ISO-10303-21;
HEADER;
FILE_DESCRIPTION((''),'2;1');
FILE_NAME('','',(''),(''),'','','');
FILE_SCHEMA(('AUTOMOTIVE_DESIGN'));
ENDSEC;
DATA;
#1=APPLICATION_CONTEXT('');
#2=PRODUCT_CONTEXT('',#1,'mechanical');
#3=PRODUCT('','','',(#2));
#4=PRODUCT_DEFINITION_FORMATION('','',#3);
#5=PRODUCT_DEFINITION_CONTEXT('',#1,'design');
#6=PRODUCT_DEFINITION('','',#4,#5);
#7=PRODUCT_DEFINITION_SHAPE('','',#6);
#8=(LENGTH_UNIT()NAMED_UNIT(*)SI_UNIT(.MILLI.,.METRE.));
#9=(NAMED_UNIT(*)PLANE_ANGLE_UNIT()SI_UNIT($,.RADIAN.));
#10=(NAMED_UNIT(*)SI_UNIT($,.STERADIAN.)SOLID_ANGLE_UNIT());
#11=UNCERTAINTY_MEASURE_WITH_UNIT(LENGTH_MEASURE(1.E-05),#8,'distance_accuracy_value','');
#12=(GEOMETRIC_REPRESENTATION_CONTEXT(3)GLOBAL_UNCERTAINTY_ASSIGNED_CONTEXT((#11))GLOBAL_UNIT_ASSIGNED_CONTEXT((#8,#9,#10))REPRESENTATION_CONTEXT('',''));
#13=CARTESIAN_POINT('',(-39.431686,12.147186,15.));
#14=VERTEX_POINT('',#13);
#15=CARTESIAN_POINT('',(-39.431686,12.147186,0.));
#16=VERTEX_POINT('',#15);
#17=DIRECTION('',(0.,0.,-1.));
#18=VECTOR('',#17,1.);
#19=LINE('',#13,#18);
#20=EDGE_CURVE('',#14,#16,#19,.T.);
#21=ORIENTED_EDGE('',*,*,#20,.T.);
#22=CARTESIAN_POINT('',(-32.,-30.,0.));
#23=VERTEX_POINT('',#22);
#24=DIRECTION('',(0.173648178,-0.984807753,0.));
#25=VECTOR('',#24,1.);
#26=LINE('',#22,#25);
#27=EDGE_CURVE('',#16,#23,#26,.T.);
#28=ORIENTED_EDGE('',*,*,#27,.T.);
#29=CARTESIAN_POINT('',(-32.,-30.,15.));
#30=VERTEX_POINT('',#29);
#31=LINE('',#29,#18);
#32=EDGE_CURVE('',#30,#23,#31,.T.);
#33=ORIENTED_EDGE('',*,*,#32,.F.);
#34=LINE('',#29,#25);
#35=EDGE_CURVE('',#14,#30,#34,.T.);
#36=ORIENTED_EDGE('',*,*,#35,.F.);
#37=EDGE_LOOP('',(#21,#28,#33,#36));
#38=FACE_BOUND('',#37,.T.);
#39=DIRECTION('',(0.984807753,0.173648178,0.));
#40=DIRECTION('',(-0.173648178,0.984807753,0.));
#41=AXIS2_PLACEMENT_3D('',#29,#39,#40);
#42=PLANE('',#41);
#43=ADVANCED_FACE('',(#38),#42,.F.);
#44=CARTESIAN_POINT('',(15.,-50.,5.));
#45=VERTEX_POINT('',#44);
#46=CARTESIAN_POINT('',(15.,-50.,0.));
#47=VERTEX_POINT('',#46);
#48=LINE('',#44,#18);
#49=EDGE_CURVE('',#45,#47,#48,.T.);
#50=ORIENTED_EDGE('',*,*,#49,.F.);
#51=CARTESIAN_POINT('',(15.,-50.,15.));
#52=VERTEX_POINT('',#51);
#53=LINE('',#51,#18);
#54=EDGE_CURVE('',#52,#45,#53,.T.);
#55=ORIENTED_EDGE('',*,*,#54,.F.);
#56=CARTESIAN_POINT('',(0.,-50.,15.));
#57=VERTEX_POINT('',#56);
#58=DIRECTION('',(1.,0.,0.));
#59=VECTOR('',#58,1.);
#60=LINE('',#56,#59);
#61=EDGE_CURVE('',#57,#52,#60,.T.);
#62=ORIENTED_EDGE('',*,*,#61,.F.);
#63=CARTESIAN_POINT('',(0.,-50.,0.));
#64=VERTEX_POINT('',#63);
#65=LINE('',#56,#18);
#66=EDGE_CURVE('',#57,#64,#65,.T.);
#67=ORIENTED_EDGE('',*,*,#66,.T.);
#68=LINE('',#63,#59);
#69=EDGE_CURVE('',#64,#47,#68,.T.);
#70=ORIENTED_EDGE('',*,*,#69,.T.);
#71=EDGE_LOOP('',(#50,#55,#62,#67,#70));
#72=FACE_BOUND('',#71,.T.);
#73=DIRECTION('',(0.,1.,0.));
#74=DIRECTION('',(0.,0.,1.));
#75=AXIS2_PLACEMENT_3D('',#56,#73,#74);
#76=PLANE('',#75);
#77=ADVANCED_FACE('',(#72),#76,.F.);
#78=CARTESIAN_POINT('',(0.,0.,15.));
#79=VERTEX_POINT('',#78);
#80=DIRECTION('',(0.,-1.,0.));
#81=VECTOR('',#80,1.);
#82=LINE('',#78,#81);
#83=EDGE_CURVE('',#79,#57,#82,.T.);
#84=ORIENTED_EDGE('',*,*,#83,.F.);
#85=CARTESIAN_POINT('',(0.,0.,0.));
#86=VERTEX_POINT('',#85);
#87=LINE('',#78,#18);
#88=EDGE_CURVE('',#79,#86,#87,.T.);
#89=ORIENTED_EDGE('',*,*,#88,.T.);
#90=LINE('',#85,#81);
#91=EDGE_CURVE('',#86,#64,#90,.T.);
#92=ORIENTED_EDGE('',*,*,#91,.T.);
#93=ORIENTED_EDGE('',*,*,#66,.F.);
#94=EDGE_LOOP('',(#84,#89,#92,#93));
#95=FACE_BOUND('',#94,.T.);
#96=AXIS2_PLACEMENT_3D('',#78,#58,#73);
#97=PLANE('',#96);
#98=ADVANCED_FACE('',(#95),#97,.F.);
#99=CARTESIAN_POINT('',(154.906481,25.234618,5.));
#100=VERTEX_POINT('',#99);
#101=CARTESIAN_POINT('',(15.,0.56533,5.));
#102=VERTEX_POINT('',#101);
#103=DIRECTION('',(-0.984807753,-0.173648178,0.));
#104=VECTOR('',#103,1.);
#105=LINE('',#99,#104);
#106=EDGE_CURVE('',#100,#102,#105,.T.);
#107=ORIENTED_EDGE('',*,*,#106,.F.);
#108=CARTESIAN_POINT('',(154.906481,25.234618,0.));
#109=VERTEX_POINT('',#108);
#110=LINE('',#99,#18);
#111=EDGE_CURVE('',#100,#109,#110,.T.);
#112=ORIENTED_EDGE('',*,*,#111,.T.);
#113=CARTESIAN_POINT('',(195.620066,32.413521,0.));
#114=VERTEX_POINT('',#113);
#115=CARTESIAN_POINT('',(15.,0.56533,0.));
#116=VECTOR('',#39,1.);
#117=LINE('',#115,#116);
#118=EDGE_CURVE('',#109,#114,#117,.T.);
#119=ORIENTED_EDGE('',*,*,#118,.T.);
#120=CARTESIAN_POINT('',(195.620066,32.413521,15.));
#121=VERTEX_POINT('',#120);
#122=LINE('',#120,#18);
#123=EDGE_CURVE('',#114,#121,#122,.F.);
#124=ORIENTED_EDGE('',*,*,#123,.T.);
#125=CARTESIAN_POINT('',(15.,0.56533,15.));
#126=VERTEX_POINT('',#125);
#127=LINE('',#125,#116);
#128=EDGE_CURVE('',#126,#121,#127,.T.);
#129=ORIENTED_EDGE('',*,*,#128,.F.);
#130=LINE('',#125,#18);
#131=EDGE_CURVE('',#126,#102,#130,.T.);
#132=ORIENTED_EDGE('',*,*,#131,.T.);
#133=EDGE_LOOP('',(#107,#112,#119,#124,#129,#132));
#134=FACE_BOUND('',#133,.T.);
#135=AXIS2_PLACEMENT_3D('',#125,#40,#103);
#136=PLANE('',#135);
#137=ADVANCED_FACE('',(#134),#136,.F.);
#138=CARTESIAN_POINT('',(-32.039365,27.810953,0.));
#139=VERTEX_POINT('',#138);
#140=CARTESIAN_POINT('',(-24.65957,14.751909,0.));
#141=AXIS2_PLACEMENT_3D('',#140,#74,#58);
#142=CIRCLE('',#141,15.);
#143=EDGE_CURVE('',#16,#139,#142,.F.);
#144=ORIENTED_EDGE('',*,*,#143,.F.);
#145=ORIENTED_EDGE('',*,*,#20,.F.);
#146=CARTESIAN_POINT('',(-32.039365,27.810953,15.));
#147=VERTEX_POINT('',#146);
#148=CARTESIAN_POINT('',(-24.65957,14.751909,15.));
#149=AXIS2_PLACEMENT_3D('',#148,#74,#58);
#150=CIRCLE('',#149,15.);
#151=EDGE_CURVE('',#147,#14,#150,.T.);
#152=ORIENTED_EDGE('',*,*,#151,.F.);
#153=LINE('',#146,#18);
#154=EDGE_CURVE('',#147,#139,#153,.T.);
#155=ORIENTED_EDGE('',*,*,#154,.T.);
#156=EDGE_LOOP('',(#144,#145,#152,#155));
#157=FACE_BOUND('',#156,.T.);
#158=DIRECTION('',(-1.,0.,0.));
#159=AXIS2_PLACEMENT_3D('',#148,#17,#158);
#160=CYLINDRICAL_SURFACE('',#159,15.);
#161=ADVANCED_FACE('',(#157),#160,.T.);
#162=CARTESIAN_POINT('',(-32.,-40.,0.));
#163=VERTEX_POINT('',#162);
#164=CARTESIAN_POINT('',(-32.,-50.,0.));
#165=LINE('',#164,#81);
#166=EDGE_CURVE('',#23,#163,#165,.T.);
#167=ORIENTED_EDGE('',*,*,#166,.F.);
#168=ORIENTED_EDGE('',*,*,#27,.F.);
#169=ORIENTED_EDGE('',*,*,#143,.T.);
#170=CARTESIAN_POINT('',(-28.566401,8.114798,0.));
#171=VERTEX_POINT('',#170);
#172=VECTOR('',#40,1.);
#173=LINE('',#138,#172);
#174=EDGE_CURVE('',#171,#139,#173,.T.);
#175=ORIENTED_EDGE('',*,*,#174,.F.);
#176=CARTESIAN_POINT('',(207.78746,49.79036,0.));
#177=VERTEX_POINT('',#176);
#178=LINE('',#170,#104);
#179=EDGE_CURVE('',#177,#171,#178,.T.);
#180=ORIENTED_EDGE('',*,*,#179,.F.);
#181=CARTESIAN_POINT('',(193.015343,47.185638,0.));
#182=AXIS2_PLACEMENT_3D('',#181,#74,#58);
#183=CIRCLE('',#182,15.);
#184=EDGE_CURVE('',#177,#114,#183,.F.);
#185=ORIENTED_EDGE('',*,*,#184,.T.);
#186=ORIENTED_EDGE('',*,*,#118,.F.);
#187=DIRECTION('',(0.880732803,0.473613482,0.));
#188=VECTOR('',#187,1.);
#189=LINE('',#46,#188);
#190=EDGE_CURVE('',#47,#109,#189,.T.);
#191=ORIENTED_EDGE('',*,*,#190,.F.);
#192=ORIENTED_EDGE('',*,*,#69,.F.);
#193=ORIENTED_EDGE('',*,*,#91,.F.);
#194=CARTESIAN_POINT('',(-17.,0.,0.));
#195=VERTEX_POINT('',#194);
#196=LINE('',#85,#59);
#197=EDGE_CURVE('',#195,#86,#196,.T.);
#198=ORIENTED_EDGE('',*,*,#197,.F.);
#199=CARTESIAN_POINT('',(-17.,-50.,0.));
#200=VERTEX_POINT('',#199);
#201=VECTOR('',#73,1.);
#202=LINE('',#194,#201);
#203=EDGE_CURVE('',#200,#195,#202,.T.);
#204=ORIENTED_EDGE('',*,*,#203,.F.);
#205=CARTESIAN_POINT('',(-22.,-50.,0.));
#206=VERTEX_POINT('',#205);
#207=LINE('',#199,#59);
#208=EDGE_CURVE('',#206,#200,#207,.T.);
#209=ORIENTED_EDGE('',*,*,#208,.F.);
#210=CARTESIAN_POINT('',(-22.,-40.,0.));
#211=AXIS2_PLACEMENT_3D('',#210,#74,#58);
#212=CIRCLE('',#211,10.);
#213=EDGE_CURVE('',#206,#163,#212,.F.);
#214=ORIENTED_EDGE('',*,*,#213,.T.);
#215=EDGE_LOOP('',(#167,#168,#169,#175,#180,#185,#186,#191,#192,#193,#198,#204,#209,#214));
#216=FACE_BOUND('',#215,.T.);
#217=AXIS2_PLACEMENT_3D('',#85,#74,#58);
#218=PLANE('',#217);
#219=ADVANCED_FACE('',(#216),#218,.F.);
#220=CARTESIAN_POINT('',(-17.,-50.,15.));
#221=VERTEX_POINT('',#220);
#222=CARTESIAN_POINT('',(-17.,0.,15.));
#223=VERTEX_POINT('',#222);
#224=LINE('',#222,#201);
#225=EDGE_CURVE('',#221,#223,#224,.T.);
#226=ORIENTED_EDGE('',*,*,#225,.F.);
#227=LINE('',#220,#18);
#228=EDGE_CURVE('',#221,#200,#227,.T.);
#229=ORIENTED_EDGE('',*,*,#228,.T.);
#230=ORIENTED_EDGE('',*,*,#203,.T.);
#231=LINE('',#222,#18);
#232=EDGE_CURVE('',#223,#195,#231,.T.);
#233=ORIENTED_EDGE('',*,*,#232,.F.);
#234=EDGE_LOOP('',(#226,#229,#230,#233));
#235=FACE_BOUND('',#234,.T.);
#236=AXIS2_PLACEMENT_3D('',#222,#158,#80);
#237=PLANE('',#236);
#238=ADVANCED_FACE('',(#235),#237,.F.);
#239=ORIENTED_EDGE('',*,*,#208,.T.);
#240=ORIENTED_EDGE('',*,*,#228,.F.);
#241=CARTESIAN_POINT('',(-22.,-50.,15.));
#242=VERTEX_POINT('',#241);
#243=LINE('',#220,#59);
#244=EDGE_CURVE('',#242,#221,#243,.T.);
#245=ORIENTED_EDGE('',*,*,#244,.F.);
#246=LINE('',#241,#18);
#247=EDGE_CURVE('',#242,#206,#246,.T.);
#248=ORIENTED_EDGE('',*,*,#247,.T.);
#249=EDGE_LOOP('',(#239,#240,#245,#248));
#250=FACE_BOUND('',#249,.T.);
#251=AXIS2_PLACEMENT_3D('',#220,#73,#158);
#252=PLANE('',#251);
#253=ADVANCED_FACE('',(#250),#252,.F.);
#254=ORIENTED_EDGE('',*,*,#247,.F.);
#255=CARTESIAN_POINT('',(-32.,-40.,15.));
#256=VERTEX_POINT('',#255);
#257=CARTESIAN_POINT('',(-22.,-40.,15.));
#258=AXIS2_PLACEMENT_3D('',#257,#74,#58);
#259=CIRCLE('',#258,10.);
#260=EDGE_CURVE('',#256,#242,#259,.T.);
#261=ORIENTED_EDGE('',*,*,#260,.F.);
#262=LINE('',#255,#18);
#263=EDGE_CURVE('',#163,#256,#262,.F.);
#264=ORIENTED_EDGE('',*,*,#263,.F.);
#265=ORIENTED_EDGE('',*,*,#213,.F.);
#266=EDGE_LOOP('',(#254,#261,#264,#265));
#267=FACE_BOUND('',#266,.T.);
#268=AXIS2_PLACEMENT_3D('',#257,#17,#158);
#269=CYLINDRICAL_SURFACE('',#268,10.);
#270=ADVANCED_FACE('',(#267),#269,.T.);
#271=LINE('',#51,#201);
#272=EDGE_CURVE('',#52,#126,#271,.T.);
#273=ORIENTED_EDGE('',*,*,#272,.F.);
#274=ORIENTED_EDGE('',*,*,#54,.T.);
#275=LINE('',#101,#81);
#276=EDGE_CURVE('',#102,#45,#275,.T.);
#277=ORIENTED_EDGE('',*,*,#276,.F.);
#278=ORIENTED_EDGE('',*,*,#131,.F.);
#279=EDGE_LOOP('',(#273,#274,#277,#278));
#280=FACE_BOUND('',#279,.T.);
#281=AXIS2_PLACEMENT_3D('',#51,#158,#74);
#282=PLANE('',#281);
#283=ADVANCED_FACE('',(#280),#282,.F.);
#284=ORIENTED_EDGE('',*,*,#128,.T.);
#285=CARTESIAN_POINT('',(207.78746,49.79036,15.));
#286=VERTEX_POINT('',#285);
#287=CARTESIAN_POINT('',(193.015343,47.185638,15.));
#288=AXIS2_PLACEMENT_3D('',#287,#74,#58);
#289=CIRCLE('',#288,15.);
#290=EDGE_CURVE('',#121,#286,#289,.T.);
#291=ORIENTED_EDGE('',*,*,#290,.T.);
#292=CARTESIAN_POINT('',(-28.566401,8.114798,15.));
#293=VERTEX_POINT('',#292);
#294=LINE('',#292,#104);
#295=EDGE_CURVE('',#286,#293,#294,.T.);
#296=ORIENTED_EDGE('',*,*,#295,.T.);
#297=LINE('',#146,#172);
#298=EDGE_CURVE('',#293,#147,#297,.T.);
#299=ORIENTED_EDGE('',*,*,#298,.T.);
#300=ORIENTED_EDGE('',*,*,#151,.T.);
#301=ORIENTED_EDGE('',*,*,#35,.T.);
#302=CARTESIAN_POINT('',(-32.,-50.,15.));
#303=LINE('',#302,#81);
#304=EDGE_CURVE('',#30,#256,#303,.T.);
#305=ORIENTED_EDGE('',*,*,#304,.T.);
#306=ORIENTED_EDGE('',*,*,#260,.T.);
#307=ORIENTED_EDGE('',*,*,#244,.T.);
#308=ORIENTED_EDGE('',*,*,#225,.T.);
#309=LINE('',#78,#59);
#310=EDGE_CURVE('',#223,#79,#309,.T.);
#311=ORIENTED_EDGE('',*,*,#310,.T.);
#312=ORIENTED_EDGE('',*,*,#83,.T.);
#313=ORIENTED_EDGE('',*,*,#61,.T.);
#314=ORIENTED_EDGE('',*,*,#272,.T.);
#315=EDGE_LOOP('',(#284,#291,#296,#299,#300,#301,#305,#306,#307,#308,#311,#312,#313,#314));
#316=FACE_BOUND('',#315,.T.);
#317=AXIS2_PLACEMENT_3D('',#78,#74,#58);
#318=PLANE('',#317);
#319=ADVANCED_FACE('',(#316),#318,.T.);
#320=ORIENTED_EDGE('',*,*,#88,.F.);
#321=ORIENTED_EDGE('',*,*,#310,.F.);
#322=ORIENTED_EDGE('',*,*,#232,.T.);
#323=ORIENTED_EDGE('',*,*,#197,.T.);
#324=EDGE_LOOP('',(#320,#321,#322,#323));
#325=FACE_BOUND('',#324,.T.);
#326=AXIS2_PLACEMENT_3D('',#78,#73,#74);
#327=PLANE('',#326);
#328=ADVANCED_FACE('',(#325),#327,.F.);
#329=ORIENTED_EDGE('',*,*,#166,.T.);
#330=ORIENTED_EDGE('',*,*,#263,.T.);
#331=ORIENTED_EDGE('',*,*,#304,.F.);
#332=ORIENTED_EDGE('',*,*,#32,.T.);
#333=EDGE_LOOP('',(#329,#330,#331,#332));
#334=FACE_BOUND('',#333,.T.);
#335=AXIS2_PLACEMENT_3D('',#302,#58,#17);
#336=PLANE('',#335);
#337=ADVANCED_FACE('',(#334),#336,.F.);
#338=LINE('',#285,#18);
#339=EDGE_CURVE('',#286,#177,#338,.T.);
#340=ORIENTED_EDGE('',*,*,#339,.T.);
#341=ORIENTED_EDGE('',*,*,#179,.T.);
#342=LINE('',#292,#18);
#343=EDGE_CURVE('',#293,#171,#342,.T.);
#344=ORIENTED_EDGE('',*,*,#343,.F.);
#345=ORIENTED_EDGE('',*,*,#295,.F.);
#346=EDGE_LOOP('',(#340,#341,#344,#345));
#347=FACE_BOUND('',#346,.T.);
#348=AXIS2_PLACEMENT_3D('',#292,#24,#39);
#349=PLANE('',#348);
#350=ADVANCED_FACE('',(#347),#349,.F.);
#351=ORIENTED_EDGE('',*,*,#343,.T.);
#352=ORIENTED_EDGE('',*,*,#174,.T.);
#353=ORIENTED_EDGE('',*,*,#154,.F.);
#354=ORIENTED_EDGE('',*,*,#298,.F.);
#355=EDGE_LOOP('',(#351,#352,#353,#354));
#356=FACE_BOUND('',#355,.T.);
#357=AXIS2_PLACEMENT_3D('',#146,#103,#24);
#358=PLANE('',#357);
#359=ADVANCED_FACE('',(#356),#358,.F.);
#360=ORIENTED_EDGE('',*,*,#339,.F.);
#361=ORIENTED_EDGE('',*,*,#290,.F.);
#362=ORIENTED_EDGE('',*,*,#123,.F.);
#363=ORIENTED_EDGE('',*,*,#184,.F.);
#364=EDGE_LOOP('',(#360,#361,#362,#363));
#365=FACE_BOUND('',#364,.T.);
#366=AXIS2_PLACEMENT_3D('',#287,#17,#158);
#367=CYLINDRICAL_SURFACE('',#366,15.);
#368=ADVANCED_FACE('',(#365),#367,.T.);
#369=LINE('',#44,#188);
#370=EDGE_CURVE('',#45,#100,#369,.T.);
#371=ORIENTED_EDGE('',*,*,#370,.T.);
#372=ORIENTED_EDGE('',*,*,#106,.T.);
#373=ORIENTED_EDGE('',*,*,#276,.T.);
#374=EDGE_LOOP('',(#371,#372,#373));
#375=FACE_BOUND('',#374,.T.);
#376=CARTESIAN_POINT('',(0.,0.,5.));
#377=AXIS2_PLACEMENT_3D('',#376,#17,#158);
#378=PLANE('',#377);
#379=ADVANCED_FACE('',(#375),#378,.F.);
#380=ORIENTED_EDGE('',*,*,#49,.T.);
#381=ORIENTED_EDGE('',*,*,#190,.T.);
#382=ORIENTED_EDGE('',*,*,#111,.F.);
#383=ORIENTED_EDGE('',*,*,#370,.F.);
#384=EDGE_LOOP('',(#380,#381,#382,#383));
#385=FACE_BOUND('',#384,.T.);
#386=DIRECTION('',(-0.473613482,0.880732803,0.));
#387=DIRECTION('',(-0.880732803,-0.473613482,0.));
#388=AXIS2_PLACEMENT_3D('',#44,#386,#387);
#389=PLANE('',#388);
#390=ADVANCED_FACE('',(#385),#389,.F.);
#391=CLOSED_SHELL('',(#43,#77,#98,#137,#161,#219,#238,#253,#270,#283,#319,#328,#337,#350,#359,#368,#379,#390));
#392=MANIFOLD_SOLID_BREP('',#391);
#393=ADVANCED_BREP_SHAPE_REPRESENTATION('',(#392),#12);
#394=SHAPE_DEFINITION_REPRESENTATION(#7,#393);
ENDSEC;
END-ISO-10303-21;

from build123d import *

# Parameters (mm, degrees)
BOSS_EXTRUDE1_DEPTH = 15
BOSS_EXTRUDE2_DEPTH = 5
FILLET1_R           = 15
FILLET2_R           = 10
FILLET3_R           = 15


# Some blends are built 0.0001 mm under size
with BuildPart() as part:
    # Sketch1 → Boss-Extrude1 (new body)
    with BuildSketch(Plane.XY):
        Polygon((0, 0), (0, -50), (15, -50), (15, 0.565330323), (210.392182336, 35.018243889), (207.787459671, 49.790360184), (-28.566401052, 8.114797544), (-32.039364606, 27.810952604), (-41.887442136, 26.074470827), (-32, -30), (-32, -50), (-17, -50), (-17, 0), align=None)
    extrude(amount=BOSS_EXTRUDE1_DEPTH)

    # Sketch2 → Boss-Extrude2 (add)
    with BuildSketch(Plane.XY):
        Polygon((15, -50), (154.906481174, 25.23461773), (15, 0.565330323), align=None)
    extrude(amount=BOSS_EXTRUDE2_DEPTH)

    # Fillet1
    # the kernel refuses this fillet: 15 mm, written as the material it takes off along each edge
    with BuildSketch(Plane(origin=(-41.887442136, 26.074470827, -35.355339059), x_dir=(0.9848077530122078, 0.17364817766693189, 0), z_dir=(0, 0, 1))) as fillet1_piece_1:
        with BuildLine():
            CenterArc((15, -14.142135624), FILLET1_R, 109.471220634, 70.528779366)
            Line((0, -14.142135624), (-0.3, -14.142135624))
            Line((-0.3, -14.142135624), (-0.3, 0))
            Line((-0.3, 0), (0, 0.3))
            ThreePointArc((0, 0.3), (5, 0.3), (9.9, 0.282842712))
            Line((9.9, 0.282842712), (10, 0))
        make_face()
    extrude(amount=85.710678119, mode=Mode.SUBTRACT)

    # Fillet2
    fillet2_edges = [part.edges().sort_by_distance(p)[0] for p in [
        (-32, -50, 7.5),
    ]]
    fillet(fillet2_edges, radius=FILLET2_R)

    # Fillet3
    fillet3_edges = [part.edges().sort_by_distance(p)[0] for p in [
        (210.392182336, 35.018243889, 7.5),
    ]]
    fillet(fillet3_edges, radius=FILLET3_R - 0.0001)  # a hair under: the kernel refuses the full size


solid = part.part
